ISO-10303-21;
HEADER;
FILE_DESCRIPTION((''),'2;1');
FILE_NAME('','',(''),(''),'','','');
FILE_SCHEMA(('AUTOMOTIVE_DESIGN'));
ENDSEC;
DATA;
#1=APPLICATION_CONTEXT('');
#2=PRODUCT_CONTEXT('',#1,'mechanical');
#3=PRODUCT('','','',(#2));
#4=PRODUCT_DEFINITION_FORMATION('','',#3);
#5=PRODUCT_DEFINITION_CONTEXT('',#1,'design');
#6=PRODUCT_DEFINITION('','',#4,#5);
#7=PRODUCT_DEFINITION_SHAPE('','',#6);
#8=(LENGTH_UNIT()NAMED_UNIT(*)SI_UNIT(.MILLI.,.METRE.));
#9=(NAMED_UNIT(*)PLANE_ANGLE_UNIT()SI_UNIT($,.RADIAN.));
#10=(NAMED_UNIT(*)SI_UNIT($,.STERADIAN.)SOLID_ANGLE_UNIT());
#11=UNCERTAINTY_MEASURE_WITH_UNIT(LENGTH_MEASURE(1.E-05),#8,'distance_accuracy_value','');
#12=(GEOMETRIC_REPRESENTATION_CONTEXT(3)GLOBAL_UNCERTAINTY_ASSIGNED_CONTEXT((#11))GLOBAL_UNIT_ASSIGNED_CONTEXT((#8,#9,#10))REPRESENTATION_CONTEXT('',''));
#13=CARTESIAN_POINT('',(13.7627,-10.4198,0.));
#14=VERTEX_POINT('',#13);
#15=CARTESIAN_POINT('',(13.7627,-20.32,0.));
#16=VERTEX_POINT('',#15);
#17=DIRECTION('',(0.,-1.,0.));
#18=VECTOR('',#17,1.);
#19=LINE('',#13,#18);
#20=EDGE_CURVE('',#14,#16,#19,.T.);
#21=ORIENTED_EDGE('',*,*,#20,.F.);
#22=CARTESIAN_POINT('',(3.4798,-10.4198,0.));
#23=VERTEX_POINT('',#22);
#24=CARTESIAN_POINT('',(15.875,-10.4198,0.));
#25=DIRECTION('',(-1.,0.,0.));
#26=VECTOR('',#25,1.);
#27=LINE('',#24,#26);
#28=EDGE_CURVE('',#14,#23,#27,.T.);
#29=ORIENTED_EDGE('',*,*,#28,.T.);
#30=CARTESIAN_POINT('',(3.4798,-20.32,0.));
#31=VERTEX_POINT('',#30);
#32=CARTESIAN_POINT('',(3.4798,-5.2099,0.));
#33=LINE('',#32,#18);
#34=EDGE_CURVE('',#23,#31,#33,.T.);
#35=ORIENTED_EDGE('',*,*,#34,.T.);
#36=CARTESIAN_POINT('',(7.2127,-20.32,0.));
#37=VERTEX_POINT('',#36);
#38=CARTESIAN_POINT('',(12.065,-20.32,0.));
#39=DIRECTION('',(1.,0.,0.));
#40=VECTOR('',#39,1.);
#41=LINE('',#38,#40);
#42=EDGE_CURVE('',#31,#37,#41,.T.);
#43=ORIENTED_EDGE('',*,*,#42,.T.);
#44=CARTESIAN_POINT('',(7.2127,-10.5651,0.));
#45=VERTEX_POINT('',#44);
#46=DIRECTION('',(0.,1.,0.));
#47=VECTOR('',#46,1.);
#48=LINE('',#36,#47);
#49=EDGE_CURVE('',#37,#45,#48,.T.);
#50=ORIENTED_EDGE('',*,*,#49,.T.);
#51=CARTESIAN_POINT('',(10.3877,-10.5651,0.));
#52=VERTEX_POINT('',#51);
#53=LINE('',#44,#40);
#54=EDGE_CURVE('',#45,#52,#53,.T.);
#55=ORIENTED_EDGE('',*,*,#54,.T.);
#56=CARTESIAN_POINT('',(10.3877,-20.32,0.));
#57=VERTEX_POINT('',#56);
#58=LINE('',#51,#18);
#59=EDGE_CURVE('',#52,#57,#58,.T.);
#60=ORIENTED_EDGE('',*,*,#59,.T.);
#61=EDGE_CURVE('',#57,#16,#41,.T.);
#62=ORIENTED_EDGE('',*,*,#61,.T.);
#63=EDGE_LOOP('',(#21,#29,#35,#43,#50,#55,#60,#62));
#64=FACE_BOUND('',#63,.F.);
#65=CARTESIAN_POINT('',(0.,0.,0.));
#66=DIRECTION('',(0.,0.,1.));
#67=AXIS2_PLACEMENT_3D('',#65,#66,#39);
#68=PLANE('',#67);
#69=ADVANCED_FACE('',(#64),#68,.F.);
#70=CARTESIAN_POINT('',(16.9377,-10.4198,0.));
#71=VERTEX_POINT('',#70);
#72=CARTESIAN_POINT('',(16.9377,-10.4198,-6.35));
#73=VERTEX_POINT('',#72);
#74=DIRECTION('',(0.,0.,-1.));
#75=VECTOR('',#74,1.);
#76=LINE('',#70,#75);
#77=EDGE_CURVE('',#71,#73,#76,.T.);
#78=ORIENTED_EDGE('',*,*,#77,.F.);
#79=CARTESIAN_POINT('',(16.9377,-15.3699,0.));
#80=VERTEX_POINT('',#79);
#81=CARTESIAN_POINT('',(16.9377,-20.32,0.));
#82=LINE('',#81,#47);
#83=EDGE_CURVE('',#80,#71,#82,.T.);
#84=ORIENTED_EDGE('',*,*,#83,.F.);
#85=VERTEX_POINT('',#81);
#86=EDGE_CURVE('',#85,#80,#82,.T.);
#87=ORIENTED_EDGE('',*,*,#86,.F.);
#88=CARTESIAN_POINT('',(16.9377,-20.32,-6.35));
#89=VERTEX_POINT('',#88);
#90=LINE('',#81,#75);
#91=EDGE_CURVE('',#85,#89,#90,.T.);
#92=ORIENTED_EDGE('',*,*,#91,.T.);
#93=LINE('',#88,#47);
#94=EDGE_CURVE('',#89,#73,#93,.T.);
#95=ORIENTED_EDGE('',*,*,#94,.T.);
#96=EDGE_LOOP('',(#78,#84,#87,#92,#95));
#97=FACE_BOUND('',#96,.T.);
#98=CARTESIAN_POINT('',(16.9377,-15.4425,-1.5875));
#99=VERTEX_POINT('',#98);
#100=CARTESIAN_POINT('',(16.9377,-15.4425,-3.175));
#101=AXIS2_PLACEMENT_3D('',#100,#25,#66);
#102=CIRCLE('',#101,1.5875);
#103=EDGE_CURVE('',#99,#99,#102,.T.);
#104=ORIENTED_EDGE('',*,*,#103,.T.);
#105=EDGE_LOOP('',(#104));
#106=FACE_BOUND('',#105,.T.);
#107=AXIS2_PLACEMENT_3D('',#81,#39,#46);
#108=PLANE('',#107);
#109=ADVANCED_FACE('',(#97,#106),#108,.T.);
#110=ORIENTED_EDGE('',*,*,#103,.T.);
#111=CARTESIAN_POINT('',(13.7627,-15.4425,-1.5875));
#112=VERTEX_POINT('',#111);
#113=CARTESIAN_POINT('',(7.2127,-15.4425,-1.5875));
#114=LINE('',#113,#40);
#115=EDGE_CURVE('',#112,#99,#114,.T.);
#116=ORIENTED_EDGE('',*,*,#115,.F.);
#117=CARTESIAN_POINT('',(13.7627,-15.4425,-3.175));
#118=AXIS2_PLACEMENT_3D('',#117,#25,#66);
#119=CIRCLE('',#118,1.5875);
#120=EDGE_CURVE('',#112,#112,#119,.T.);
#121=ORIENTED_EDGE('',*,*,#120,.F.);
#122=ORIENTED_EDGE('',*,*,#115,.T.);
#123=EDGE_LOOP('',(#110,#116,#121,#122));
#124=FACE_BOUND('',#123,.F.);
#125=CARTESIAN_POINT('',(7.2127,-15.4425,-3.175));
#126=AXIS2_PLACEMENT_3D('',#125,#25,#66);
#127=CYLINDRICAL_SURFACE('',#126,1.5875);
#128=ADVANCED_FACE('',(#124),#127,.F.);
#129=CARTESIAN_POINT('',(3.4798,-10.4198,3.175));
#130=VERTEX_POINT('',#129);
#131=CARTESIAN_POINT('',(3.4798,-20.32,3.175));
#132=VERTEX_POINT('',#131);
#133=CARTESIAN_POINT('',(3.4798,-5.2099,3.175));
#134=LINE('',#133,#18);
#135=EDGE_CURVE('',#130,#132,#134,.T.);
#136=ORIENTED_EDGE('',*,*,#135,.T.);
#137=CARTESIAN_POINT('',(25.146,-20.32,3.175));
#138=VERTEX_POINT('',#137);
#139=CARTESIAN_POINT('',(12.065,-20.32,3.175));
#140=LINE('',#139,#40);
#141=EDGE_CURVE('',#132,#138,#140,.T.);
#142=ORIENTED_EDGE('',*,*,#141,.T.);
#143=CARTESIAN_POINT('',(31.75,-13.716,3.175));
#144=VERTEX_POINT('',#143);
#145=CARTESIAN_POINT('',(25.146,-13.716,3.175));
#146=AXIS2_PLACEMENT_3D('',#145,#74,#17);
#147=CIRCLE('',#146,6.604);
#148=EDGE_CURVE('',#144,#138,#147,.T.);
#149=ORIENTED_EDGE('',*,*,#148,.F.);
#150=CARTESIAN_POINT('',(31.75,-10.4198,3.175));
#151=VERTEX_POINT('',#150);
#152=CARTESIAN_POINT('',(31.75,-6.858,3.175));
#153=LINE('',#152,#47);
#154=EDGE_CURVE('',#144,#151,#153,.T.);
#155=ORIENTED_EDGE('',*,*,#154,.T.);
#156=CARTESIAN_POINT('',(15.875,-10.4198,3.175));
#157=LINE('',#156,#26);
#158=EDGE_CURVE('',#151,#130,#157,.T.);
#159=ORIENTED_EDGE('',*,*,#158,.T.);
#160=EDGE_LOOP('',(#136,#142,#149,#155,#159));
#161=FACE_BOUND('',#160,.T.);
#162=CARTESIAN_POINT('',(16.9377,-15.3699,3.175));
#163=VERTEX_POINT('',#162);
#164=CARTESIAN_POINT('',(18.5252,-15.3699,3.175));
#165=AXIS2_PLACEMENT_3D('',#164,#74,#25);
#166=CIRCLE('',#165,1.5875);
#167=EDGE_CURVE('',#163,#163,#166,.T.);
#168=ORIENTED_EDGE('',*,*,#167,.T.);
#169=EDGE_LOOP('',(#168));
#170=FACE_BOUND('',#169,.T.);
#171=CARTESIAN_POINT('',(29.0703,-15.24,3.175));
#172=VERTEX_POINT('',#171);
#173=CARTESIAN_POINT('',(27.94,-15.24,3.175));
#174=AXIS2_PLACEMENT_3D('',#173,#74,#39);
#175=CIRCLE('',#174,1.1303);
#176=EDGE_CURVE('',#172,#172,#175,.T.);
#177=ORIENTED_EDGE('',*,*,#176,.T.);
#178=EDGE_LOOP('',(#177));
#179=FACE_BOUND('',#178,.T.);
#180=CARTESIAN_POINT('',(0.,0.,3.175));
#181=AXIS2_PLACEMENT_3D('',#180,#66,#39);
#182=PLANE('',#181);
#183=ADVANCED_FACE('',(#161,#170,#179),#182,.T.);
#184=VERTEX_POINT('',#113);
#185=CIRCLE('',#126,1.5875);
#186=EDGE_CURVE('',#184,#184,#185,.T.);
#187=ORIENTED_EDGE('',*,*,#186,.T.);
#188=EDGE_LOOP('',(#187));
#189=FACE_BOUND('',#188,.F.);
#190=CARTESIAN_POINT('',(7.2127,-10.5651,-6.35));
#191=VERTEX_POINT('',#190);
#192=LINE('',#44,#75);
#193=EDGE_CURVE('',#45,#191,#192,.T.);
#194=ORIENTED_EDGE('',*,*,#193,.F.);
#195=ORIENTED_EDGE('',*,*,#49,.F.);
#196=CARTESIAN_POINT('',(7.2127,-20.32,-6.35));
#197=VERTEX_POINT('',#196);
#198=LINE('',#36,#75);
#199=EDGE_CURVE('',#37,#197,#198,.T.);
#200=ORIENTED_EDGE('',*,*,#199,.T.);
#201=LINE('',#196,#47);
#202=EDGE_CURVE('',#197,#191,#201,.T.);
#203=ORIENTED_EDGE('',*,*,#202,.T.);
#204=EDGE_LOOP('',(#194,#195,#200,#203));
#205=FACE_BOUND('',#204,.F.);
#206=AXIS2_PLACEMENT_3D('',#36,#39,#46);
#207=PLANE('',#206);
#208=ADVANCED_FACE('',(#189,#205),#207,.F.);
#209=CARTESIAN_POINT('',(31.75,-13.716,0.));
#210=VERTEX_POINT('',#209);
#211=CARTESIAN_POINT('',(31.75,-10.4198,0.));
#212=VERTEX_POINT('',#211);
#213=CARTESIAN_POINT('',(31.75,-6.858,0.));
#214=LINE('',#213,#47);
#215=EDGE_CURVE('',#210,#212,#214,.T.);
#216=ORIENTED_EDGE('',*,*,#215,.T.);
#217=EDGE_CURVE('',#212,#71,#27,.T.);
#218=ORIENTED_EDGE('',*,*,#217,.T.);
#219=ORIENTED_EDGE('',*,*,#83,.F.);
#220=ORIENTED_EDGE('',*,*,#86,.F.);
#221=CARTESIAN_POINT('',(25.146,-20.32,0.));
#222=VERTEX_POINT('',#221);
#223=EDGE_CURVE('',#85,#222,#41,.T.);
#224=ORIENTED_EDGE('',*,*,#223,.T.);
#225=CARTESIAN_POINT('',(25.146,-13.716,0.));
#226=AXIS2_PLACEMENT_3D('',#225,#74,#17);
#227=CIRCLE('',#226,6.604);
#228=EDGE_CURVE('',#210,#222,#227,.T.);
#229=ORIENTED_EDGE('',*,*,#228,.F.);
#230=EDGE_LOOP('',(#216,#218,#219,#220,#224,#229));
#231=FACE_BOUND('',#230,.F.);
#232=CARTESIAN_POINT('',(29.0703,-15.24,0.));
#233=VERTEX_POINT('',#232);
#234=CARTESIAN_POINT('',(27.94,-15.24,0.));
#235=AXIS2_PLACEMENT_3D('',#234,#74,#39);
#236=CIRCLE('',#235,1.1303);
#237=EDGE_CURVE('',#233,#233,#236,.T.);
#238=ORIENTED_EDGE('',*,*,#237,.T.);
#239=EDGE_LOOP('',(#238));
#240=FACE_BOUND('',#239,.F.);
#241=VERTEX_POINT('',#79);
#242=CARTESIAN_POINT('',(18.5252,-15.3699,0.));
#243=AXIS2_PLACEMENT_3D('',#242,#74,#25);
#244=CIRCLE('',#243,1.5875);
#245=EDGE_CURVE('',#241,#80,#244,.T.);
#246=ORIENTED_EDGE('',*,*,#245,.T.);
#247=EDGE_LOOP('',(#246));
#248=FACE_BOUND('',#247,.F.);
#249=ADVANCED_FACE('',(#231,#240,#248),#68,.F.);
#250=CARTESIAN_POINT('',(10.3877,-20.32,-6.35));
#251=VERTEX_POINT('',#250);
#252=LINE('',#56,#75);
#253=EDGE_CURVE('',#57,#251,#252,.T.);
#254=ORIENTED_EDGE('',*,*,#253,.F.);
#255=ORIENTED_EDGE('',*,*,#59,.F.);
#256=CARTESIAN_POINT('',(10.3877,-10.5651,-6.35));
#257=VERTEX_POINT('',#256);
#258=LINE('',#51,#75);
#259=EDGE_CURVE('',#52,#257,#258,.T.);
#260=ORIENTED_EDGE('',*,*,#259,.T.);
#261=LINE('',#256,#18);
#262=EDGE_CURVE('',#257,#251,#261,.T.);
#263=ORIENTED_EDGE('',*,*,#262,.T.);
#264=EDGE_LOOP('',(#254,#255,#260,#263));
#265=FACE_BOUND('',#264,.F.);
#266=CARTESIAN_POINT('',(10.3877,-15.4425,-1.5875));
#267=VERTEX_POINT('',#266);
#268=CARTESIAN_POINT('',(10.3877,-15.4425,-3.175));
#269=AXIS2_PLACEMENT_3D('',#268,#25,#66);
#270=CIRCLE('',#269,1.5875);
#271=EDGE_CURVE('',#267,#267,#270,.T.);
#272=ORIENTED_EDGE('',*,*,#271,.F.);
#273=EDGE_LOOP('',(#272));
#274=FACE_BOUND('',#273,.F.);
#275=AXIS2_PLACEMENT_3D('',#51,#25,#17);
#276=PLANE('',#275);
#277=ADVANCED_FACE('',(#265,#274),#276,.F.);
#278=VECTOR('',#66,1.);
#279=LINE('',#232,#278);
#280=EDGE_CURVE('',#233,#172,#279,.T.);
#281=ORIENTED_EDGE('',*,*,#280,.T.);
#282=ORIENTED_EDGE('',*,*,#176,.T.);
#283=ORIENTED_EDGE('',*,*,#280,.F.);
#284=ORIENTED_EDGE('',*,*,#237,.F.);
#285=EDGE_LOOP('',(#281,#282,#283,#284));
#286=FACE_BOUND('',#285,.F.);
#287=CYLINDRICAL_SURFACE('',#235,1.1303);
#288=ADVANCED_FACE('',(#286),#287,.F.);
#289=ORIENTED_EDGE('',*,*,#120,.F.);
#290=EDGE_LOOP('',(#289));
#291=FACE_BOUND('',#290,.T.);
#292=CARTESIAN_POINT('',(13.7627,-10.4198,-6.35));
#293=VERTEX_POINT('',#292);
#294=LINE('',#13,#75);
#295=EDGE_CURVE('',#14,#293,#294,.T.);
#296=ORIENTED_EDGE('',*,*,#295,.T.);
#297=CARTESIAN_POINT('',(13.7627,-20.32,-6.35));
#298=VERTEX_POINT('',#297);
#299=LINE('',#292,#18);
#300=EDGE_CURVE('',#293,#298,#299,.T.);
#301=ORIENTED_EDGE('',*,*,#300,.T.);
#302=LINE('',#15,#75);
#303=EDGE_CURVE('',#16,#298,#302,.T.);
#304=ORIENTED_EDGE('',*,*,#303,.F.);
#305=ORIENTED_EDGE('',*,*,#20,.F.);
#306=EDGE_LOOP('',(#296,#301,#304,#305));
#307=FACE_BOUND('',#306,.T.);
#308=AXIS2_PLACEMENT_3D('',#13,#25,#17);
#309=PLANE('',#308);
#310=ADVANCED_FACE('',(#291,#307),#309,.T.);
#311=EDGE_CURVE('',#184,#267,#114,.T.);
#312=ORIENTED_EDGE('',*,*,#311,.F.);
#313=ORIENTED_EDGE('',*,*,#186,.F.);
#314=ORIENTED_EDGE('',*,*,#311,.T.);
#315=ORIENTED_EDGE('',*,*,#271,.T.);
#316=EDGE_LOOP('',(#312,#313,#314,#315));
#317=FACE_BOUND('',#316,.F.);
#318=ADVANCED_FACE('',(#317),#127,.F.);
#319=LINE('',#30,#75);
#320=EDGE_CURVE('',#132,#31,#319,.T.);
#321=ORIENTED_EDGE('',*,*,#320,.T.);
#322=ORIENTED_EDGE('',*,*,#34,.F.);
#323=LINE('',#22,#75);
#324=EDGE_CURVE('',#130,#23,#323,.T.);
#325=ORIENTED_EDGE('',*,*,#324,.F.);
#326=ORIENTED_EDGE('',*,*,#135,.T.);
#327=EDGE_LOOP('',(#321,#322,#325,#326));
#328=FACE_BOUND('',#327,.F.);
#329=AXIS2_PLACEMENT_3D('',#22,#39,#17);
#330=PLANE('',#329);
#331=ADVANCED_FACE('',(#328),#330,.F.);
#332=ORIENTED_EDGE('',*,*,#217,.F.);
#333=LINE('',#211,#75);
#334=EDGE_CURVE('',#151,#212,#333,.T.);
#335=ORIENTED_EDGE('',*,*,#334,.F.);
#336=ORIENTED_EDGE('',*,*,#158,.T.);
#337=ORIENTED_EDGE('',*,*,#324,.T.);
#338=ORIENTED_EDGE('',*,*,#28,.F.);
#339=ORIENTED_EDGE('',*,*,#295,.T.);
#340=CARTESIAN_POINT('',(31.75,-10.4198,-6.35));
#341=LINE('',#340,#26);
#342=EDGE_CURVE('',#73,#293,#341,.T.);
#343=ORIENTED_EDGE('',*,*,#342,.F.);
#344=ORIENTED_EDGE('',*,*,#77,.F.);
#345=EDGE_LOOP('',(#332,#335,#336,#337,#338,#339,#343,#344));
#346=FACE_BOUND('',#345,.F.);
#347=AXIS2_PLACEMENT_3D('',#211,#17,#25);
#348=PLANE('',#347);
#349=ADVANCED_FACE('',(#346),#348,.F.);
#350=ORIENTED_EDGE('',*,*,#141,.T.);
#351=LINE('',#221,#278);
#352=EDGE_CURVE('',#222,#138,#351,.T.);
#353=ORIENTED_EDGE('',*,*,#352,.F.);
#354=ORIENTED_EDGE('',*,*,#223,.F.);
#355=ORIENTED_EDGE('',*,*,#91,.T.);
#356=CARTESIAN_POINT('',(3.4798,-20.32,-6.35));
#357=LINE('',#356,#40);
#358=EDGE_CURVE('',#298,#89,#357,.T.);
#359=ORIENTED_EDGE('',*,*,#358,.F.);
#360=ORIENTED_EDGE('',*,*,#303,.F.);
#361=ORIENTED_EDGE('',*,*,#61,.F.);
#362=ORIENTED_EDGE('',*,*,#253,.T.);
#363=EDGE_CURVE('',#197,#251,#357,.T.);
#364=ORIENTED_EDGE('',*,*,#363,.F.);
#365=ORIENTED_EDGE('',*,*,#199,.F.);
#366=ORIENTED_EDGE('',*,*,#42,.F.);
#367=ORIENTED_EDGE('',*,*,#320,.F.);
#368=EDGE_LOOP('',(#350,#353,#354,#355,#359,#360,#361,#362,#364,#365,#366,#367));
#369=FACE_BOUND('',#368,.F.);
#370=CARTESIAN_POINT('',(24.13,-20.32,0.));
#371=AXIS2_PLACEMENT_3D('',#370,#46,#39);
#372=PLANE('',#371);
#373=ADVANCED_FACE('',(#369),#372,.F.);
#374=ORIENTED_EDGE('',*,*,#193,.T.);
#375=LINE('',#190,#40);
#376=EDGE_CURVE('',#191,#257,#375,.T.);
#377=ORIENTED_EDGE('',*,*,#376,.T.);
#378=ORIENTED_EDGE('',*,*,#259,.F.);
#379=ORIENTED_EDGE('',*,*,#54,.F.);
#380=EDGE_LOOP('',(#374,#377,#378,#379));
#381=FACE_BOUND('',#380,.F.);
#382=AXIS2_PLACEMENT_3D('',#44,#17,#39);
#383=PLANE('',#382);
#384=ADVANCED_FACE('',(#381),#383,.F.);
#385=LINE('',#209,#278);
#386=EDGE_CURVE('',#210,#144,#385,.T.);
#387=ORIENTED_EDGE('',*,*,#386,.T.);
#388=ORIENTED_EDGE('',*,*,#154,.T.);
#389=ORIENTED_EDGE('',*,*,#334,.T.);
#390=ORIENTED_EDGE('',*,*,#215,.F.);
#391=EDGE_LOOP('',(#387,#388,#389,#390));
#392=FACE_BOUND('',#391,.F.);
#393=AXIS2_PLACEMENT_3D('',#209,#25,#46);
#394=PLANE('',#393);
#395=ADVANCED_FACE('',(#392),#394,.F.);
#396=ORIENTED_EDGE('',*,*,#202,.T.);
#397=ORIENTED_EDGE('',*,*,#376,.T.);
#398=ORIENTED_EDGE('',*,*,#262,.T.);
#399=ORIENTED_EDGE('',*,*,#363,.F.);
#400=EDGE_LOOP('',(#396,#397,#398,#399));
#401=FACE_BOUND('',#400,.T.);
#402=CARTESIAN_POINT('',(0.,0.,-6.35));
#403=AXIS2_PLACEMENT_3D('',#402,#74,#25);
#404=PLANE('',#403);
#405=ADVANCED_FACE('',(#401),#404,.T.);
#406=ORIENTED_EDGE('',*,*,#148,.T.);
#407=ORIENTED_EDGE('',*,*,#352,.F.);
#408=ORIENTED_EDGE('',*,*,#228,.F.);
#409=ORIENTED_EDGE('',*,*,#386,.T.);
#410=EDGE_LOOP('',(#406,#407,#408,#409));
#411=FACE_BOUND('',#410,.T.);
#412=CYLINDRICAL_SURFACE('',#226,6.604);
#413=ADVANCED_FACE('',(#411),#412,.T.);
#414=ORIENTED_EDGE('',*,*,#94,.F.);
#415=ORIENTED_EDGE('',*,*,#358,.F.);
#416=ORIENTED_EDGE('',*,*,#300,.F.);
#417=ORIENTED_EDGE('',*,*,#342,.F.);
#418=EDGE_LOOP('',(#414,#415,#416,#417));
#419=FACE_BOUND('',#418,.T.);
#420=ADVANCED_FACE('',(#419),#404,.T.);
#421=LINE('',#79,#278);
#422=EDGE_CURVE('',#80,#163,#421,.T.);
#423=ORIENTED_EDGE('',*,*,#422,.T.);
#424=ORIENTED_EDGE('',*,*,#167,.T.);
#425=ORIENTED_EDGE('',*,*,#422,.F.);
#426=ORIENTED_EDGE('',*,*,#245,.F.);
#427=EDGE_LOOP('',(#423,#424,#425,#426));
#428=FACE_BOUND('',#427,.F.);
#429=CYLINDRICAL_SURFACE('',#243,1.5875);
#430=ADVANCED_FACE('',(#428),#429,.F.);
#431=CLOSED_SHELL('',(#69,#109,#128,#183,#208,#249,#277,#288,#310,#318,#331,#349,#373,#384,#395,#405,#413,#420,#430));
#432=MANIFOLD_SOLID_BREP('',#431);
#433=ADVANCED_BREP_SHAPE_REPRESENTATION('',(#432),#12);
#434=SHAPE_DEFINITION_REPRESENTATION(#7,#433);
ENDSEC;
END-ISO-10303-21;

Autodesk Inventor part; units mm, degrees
ref_plane "YZ Plane" through (0, 0, 0) normal (1, 0, 0) x (0, 1, 0)
ref_plane "XZ Plane" through (0, 0, 0) normal (0, 1, 0) x (-1, 0, 0)
ref_plane "XY Plane" through (0, 0, 0) normal (0, 0, 1) x (1, 0, 0)
ref_plane "Work Plane1" through (0, 0, 0) normal (0, 0, 1) x (1, 0, 0)
sketch "Sketch1" plane through (0, 0, 0) normal (0, 0, 1) x (1, 0, 0)
  line L0 (31.75, -13.716) -> (31.75, -6.096) projected
  arc A0 (25.146, -20.32) -> (31.75, -13.716) centre (25.146, -13.716) ccw projected
  line L1 (24.13, -20.32) -> (25.146, -20.32) projected
  circle A1 centre (27.94, -15.24) radius 1.1303 projected
  line L2 (31.75, -6.096) -> (31.75, -10.4198)
  line L3 (31.75, -10.4198) -> (24.13, -10.4198)
  line L4 (24.13, -10.4198) -> (24.13, -20.32)
  point P0 (0, 0)
extrude "Extrusion1" add sketch "Sketch1" along normal blind 3.175
move faces "Move1" translate (-20.6502, 0, 0) faces at (24.13, -13.7199, 1.0583)
sketch "Sketch2" plane through (0, 0, 0) normal (0, 0, -1) x (-1, 0, 0)
  line L0 (-13.6627, -7.7169) -> (-13.6627, -20.1208) projected
  line L1 (-10.4877, -7.7169) -> (-10.4877, -20.1208)
  line L2 (-3.4798, -20.32) -> (-25.146, -20.32) projected
  line L3 (-10.3877, -20.32) -> (-7.2127, -20.32)
  line L4 (-7.2127, -20.32) -> (-7.2127, -10.5651)
  line L5 (-7.2127, -10.5651) -> (-10.3877, -10.5651)
  line L6 (-10.3877, -10.5651) -> (-10.3877, -20.32)
  line L7 (-31.75, -10.4198) -> (-3.4798, -10.4198) projected
  line L8 (-13.7627, -20.32) -> (-16.9377, -20.32)
  line L9 (-16.9377, -20.32) -> (-16.9377, -10.4198)
  line L10 (-16.9377, -10.4198) -> (-13.7627, -10.4198)
  line L11 (-13.7627, -10.4198) -> (-13.7627, -20.32)
  point P0 (0, 0)
  dimension "d5" = 0.1
  dimension "d6" = 0.1
  dimension "d7" = 3.175
  dimension "d8" = 3.175
extrude "Extrusion2" add sketch "Sketch2" along normal blind 6.35
sketch "Sketch3" plane through (6.6139, -20.32, 0) normal (-1, 0, 0) x (0, 0, 1)
  line L0 (0, 9.7549) -> (0, 0) construction
  line L1 (0, 9.7549) -> (-6.35, 9.7549) construction
  line L2 (-6.35, 0) -> (-6.35, 9.7549) construction
  line L3 (0, 0) -> (-6.35, 0) construction
  line L4 (0, 0) -> (-6.35, 9.7549) construction
  circle A0 centre (-3.175, 4.8775) radius 1.5875
  point P0 (0, 20.32)
  dimension "d11" = 3.175
extrude "Extrusion3" [suppressed]
sketch "Sketch4" plane through (0, 0, 0) normal (0, 0, -1) x (-1, 0, 0)
  line L0 (-16.9377, -20.32) -> (-16.9377, -10.4198) construction
  line L1 (-16.9377, -15.3699) -> (-22.7751, -15.3699) construction
  circle A0 centre (-18.5252, -15.3699) radius 1.5875
  point P0 (0, 0)
  dimension "d17" = 3.175
extrude "Extrusion4" cut sketch "Sketch4" against normal blind 12.7
sketch "Sketch5" plane through (7.2127, -20.32, 0) normal (-1, 0, 0) x (0, 0, 1)
  line L0 (0, 9.7549) -> (0, 0) projected
  line L1 (-6.35, 0) -> (-6.35, 9.7549) projected
  line L2 (0, 9.7549) -> (-6.35, 0) construction
  circle A0 centre (-3.175, 4.8775) radius 1.5875
  point P0 (0, 20.32)
  dimension "d20" = 3.175
extrude "Extrusion5" cut sketch "Sketch5" against normal blind 17.4625
properties part number "adapter_1"
